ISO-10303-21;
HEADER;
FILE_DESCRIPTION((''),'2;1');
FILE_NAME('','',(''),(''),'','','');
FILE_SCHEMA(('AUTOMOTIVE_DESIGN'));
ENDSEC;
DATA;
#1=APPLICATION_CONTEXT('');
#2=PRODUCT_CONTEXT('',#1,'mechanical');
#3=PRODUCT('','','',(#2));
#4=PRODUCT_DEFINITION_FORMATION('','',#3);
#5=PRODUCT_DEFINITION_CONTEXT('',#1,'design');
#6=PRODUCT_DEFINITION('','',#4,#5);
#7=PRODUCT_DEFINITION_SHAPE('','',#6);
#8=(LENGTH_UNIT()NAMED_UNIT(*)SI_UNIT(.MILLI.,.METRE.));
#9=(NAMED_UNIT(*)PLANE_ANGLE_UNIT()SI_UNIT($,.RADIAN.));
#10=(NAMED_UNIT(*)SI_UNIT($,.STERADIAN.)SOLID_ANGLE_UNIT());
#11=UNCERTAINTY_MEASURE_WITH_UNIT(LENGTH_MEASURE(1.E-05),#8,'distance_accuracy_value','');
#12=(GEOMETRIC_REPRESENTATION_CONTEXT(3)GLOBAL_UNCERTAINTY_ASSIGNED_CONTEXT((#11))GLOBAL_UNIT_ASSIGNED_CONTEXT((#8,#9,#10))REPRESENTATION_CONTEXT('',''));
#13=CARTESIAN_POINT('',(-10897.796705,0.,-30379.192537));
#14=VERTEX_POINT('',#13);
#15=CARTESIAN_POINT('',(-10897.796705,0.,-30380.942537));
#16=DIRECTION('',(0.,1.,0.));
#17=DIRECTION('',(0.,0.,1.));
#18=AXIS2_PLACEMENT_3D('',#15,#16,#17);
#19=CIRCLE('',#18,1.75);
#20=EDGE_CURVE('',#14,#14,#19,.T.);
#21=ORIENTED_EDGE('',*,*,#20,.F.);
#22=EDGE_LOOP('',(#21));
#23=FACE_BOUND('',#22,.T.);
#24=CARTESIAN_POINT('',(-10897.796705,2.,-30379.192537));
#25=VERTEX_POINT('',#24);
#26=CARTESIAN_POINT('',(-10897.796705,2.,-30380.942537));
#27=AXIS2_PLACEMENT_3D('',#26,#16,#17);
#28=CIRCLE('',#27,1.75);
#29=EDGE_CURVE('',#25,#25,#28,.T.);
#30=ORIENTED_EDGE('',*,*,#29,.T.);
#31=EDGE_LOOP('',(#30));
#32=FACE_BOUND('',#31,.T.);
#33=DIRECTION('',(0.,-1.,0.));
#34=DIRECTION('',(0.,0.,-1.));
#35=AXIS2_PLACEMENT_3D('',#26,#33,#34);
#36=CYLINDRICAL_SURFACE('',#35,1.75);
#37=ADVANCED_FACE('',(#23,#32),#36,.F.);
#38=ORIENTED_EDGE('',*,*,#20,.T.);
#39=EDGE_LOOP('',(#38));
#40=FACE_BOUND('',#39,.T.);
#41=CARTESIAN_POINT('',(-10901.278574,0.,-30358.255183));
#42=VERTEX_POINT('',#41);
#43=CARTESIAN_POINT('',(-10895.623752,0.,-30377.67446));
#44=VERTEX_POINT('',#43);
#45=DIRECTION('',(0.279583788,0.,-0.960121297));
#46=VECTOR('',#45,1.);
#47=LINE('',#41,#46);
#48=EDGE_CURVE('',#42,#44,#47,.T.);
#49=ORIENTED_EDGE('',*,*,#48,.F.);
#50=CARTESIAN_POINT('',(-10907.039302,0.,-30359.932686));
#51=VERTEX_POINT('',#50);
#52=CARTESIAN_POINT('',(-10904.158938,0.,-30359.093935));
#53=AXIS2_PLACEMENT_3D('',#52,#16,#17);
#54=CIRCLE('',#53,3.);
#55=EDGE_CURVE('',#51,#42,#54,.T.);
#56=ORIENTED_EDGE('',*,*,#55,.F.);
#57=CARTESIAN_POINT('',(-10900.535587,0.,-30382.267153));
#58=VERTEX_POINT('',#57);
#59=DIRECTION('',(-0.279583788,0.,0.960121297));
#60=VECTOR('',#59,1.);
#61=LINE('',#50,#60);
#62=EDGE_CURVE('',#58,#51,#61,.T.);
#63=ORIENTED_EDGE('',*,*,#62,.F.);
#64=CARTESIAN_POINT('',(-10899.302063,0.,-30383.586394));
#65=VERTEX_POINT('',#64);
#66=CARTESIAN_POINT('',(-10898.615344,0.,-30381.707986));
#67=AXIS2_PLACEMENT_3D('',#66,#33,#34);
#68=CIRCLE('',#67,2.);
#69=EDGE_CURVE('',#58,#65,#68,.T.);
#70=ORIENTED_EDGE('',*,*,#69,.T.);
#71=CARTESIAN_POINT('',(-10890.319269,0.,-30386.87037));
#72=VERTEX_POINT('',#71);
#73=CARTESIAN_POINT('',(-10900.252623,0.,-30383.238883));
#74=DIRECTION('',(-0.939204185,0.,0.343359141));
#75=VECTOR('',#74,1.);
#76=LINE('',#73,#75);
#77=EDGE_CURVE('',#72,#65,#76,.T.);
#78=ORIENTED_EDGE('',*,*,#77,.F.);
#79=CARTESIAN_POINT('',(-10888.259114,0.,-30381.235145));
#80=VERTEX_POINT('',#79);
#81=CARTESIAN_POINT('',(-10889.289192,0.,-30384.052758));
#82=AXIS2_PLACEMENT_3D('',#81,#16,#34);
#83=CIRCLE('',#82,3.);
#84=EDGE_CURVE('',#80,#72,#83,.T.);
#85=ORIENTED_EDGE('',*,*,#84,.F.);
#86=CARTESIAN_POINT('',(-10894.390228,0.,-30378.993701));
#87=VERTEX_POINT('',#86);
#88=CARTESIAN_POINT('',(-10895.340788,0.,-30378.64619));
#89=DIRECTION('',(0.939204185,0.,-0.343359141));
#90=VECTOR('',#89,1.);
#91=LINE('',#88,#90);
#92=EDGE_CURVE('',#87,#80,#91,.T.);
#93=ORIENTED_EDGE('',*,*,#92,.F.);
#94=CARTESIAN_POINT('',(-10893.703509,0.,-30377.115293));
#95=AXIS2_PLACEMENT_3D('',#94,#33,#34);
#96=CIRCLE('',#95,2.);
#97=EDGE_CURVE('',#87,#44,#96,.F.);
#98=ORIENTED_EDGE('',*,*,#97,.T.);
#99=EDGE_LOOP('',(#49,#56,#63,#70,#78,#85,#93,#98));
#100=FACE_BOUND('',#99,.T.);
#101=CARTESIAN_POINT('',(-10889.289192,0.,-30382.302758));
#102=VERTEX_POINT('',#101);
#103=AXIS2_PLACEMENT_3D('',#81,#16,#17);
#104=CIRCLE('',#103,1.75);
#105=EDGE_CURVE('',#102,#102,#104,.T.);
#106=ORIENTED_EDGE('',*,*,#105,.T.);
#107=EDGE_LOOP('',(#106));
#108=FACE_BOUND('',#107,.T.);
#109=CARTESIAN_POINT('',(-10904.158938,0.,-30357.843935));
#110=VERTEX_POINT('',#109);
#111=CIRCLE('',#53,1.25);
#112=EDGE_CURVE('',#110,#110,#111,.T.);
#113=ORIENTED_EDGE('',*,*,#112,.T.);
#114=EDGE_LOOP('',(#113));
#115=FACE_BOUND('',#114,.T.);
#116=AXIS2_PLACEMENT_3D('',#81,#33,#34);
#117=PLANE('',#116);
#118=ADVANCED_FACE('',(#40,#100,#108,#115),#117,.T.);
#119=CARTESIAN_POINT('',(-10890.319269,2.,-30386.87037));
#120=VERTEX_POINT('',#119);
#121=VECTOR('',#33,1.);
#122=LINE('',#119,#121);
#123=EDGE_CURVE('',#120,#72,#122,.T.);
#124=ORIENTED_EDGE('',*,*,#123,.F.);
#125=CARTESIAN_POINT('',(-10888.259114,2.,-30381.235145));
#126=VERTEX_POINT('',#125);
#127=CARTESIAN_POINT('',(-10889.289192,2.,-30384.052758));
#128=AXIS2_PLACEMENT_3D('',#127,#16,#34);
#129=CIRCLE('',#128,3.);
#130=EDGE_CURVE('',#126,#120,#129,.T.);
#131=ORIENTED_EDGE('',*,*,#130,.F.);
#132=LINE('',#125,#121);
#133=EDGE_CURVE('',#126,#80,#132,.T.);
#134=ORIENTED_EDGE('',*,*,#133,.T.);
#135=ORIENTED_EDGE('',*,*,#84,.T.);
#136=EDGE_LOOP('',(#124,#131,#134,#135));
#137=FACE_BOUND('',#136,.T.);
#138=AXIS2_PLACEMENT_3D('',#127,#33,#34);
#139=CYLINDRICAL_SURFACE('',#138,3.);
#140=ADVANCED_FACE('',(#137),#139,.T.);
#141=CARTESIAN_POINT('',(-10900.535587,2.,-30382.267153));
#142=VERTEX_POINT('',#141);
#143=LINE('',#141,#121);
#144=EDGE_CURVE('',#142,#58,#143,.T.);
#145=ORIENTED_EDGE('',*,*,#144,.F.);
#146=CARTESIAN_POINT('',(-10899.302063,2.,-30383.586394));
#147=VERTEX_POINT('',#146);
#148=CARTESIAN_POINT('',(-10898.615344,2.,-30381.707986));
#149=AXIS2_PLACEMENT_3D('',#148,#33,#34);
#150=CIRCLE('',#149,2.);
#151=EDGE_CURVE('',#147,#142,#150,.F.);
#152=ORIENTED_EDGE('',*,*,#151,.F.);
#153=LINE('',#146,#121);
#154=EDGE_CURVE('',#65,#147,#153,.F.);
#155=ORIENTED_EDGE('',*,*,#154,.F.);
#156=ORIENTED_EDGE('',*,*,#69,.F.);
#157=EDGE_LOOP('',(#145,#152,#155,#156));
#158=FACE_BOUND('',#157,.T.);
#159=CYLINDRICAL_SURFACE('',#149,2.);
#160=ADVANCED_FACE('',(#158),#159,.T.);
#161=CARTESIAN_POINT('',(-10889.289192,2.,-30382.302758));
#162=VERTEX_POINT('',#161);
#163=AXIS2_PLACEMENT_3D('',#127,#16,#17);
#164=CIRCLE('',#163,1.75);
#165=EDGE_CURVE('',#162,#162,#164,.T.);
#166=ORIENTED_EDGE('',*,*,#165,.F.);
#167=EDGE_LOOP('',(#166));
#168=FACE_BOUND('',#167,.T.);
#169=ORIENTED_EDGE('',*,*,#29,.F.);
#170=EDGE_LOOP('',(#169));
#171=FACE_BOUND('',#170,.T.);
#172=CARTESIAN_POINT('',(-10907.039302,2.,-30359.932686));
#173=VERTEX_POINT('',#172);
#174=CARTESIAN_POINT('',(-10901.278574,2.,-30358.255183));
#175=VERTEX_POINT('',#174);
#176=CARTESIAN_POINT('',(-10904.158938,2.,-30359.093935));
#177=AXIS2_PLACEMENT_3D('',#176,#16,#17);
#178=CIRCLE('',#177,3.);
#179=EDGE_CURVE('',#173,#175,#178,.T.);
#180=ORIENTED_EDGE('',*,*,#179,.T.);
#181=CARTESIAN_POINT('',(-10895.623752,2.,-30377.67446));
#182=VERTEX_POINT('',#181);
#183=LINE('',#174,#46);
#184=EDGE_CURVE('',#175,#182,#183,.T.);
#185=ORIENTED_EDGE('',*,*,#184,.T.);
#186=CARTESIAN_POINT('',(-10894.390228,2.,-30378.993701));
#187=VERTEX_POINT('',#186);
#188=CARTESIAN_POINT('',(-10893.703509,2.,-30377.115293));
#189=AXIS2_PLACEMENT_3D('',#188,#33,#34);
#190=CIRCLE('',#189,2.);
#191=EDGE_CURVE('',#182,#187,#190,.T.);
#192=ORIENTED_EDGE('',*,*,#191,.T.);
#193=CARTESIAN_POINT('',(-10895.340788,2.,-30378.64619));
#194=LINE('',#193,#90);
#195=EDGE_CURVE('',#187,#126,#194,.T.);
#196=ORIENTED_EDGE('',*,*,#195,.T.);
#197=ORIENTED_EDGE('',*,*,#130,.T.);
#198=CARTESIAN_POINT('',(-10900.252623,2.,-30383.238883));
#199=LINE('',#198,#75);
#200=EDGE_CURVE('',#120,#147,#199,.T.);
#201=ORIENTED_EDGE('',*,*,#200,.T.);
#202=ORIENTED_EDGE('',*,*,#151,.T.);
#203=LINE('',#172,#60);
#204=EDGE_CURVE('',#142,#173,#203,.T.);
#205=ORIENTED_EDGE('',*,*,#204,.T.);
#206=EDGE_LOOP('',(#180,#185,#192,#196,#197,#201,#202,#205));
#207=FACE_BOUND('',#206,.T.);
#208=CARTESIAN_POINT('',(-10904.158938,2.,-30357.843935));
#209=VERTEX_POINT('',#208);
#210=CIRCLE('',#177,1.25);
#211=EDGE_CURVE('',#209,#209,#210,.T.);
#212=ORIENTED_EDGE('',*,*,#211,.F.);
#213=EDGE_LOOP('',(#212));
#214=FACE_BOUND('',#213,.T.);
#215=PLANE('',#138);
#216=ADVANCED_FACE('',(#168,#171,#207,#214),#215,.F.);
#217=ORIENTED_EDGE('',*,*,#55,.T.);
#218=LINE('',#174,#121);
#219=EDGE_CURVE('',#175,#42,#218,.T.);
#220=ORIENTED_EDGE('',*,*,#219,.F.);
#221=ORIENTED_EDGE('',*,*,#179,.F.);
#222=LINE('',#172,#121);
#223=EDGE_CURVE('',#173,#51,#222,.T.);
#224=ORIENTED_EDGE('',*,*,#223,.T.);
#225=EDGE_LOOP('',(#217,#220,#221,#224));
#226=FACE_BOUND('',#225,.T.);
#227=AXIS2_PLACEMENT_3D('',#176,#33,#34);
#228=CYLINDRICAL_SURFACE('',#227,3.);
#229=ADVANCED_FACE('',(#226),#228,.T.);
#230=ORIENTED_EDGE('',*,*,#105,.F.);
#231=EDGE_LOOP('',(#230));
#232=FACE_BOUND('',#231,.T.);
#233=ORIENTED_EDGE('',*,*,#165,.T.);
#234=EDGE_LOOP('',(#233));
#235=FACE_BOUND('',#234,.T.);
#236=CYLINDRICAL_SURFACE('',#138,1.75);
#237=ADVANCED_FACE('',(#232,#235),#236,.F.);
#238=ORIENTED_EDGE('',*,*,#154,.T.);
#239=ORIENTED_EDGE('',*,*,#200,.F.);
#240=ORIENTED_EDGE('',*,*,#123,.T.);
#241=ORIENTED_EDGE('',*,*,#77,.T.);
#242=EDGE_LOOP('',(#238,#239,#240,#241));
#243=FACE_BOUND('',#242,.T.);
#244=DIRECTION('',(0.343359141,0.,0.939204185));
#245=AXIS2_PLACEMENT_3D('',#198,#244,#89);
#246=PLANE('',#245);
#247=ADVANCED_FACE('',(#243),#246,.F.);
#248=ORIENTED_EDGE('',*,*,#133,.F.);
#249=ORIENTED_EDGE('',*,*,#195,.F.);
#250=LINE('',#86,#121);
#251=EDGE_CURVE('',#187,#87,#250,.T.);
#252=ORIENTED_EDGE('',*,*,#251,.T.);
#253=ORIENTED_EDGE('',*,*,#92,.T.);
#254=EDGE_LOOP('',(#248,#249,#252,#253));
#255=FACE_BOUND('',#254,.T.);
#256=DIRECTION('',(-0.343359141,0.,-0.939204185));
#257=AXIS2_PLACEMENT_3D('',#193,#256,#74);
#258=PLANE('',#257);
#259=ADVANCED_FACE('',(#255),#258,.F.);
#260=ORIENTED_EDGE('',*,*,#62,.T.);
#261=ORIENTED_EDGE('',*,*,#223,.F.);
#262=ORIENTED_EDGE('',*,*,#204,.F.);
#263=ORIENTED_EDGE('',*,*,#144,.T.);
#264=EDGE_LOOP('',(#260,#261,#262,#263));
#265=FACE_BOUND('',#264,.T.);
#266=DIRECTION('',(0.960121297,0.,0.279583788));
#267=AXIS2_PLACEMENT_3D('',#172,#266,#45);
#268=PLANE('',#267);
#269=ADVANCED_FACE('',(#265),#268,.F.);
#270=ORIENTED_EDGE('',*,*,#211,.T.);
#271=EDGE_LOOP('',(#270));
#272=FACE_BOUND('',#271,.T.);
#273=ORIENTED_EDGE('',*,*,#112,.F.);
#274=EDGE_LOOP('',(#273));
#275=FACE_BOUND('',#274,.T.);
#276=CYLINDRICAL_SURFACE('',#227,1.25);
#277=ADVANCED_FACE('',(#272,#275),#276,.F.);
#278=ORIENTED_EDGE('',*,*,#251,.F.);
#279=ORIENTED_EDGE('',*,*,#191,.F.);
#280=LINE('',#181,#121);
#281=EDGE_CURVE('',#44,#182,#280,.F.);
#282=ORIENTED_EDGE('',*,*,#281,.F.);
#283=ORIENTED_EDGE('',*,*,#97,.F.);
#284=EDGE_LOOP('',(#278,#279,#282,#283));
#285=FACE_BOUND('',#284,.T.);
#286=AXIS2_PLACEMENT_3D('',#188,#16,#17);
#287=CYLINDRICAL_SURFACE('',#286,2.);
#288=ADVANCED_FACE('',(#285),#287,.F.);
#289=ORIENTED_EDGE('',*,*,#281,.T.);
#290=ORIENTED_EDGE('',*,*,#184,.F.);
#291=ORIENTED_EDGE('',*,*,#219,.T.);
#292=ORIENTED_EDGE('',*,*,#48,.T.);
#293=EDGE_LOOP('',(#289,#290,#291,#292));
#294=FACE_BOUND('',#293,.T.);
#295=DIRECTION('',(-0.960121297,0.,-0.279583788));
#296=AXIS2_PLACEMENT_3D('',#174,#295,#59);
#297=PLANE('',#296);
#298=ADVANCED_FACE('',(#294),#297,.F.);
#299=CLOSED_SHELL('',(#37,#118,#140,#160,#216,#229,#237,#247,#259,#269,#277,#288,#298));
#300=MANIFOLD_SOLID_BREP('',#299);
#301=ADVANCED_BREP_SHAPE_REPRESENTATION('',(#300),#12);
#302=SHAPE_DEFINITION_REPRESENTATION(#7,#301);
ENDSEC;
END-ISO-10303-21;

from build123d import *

# Parameters (mm, degrees)
BOSS_EXTRUDE1_OUTLINE_R   = 1.25
BOSS_EXTRUDE1_OUTLINE_R_2 = 1.75
BOSS_EXTRUDE1_DEPTH       = 2
FILLET1_R                 = 2


# Read off the part's stored shape, not the designer's step: Boss-Extrude1
with BuildPart() as part:
    # Boss-Extrude1 outline → Boss-Extrude1 (new body)
    with BuildSketch(Plane(origin=(0, 0, 0), x_dir=(1, 0, 0), z_dir=(0, 1, 0))):
        with BuildLine():
            ThreePointArc((-10888.259114433, 30381.23514527), (-10886.471579302, 30385.082835246), (-10890.319269278, 30386.870370378))
            Line((-10890.319269278, 30386.870370378), (-10900.252622841, 30383.238883421))
            Line((-10900.252622841, 30383.238883421), (-10907.03930171, 30359.932686135))
            ThreePointArc((-10907.03930171, 30359.932686135), (-10904.997689181, 30356.21357088), (-10901.278573926, 30358.255183408))
            Line((-10901.278573926, 30358.255183408), (-10895.340787747, 30378.646190381))
            Line((-10895.340787747, 30378.646190381), (-10888.259114433, 30381.23514527))
        make_face()
        with Locations((-10904.158937818, 30359.093934771)):
            Circle(BOSS_EXTRUDE1_OUTLINE_R, mode=Mode.SUBTRACT)
        with Locations((-10897.796705294, 30380.942536901)):
            Circle(BOSS_EXTRUDE1_OUTLINE_R_2, mode=Mode.SUBTRACT)
        with Locations((-10889.289191855, 30384.052757824)):
            Circle(BOSS_EXTRUDE1_OUTLINE_R_2, mode=Mode.SUBTRACT)
    extrude(amount=BOSS_EXTRUDE1_DEPTH)

    # Fillet1
    fillet1_edges = [part.edges().sort_by_distance(p)[0] for p in [
        (-10895.340787747, 1, -30378.646190381),
        (-10900.252622841, 1, -30383.238883421),
    ]]
    fillet(fillet1_edges, radius=FILLET1_R)


solid = part.part
